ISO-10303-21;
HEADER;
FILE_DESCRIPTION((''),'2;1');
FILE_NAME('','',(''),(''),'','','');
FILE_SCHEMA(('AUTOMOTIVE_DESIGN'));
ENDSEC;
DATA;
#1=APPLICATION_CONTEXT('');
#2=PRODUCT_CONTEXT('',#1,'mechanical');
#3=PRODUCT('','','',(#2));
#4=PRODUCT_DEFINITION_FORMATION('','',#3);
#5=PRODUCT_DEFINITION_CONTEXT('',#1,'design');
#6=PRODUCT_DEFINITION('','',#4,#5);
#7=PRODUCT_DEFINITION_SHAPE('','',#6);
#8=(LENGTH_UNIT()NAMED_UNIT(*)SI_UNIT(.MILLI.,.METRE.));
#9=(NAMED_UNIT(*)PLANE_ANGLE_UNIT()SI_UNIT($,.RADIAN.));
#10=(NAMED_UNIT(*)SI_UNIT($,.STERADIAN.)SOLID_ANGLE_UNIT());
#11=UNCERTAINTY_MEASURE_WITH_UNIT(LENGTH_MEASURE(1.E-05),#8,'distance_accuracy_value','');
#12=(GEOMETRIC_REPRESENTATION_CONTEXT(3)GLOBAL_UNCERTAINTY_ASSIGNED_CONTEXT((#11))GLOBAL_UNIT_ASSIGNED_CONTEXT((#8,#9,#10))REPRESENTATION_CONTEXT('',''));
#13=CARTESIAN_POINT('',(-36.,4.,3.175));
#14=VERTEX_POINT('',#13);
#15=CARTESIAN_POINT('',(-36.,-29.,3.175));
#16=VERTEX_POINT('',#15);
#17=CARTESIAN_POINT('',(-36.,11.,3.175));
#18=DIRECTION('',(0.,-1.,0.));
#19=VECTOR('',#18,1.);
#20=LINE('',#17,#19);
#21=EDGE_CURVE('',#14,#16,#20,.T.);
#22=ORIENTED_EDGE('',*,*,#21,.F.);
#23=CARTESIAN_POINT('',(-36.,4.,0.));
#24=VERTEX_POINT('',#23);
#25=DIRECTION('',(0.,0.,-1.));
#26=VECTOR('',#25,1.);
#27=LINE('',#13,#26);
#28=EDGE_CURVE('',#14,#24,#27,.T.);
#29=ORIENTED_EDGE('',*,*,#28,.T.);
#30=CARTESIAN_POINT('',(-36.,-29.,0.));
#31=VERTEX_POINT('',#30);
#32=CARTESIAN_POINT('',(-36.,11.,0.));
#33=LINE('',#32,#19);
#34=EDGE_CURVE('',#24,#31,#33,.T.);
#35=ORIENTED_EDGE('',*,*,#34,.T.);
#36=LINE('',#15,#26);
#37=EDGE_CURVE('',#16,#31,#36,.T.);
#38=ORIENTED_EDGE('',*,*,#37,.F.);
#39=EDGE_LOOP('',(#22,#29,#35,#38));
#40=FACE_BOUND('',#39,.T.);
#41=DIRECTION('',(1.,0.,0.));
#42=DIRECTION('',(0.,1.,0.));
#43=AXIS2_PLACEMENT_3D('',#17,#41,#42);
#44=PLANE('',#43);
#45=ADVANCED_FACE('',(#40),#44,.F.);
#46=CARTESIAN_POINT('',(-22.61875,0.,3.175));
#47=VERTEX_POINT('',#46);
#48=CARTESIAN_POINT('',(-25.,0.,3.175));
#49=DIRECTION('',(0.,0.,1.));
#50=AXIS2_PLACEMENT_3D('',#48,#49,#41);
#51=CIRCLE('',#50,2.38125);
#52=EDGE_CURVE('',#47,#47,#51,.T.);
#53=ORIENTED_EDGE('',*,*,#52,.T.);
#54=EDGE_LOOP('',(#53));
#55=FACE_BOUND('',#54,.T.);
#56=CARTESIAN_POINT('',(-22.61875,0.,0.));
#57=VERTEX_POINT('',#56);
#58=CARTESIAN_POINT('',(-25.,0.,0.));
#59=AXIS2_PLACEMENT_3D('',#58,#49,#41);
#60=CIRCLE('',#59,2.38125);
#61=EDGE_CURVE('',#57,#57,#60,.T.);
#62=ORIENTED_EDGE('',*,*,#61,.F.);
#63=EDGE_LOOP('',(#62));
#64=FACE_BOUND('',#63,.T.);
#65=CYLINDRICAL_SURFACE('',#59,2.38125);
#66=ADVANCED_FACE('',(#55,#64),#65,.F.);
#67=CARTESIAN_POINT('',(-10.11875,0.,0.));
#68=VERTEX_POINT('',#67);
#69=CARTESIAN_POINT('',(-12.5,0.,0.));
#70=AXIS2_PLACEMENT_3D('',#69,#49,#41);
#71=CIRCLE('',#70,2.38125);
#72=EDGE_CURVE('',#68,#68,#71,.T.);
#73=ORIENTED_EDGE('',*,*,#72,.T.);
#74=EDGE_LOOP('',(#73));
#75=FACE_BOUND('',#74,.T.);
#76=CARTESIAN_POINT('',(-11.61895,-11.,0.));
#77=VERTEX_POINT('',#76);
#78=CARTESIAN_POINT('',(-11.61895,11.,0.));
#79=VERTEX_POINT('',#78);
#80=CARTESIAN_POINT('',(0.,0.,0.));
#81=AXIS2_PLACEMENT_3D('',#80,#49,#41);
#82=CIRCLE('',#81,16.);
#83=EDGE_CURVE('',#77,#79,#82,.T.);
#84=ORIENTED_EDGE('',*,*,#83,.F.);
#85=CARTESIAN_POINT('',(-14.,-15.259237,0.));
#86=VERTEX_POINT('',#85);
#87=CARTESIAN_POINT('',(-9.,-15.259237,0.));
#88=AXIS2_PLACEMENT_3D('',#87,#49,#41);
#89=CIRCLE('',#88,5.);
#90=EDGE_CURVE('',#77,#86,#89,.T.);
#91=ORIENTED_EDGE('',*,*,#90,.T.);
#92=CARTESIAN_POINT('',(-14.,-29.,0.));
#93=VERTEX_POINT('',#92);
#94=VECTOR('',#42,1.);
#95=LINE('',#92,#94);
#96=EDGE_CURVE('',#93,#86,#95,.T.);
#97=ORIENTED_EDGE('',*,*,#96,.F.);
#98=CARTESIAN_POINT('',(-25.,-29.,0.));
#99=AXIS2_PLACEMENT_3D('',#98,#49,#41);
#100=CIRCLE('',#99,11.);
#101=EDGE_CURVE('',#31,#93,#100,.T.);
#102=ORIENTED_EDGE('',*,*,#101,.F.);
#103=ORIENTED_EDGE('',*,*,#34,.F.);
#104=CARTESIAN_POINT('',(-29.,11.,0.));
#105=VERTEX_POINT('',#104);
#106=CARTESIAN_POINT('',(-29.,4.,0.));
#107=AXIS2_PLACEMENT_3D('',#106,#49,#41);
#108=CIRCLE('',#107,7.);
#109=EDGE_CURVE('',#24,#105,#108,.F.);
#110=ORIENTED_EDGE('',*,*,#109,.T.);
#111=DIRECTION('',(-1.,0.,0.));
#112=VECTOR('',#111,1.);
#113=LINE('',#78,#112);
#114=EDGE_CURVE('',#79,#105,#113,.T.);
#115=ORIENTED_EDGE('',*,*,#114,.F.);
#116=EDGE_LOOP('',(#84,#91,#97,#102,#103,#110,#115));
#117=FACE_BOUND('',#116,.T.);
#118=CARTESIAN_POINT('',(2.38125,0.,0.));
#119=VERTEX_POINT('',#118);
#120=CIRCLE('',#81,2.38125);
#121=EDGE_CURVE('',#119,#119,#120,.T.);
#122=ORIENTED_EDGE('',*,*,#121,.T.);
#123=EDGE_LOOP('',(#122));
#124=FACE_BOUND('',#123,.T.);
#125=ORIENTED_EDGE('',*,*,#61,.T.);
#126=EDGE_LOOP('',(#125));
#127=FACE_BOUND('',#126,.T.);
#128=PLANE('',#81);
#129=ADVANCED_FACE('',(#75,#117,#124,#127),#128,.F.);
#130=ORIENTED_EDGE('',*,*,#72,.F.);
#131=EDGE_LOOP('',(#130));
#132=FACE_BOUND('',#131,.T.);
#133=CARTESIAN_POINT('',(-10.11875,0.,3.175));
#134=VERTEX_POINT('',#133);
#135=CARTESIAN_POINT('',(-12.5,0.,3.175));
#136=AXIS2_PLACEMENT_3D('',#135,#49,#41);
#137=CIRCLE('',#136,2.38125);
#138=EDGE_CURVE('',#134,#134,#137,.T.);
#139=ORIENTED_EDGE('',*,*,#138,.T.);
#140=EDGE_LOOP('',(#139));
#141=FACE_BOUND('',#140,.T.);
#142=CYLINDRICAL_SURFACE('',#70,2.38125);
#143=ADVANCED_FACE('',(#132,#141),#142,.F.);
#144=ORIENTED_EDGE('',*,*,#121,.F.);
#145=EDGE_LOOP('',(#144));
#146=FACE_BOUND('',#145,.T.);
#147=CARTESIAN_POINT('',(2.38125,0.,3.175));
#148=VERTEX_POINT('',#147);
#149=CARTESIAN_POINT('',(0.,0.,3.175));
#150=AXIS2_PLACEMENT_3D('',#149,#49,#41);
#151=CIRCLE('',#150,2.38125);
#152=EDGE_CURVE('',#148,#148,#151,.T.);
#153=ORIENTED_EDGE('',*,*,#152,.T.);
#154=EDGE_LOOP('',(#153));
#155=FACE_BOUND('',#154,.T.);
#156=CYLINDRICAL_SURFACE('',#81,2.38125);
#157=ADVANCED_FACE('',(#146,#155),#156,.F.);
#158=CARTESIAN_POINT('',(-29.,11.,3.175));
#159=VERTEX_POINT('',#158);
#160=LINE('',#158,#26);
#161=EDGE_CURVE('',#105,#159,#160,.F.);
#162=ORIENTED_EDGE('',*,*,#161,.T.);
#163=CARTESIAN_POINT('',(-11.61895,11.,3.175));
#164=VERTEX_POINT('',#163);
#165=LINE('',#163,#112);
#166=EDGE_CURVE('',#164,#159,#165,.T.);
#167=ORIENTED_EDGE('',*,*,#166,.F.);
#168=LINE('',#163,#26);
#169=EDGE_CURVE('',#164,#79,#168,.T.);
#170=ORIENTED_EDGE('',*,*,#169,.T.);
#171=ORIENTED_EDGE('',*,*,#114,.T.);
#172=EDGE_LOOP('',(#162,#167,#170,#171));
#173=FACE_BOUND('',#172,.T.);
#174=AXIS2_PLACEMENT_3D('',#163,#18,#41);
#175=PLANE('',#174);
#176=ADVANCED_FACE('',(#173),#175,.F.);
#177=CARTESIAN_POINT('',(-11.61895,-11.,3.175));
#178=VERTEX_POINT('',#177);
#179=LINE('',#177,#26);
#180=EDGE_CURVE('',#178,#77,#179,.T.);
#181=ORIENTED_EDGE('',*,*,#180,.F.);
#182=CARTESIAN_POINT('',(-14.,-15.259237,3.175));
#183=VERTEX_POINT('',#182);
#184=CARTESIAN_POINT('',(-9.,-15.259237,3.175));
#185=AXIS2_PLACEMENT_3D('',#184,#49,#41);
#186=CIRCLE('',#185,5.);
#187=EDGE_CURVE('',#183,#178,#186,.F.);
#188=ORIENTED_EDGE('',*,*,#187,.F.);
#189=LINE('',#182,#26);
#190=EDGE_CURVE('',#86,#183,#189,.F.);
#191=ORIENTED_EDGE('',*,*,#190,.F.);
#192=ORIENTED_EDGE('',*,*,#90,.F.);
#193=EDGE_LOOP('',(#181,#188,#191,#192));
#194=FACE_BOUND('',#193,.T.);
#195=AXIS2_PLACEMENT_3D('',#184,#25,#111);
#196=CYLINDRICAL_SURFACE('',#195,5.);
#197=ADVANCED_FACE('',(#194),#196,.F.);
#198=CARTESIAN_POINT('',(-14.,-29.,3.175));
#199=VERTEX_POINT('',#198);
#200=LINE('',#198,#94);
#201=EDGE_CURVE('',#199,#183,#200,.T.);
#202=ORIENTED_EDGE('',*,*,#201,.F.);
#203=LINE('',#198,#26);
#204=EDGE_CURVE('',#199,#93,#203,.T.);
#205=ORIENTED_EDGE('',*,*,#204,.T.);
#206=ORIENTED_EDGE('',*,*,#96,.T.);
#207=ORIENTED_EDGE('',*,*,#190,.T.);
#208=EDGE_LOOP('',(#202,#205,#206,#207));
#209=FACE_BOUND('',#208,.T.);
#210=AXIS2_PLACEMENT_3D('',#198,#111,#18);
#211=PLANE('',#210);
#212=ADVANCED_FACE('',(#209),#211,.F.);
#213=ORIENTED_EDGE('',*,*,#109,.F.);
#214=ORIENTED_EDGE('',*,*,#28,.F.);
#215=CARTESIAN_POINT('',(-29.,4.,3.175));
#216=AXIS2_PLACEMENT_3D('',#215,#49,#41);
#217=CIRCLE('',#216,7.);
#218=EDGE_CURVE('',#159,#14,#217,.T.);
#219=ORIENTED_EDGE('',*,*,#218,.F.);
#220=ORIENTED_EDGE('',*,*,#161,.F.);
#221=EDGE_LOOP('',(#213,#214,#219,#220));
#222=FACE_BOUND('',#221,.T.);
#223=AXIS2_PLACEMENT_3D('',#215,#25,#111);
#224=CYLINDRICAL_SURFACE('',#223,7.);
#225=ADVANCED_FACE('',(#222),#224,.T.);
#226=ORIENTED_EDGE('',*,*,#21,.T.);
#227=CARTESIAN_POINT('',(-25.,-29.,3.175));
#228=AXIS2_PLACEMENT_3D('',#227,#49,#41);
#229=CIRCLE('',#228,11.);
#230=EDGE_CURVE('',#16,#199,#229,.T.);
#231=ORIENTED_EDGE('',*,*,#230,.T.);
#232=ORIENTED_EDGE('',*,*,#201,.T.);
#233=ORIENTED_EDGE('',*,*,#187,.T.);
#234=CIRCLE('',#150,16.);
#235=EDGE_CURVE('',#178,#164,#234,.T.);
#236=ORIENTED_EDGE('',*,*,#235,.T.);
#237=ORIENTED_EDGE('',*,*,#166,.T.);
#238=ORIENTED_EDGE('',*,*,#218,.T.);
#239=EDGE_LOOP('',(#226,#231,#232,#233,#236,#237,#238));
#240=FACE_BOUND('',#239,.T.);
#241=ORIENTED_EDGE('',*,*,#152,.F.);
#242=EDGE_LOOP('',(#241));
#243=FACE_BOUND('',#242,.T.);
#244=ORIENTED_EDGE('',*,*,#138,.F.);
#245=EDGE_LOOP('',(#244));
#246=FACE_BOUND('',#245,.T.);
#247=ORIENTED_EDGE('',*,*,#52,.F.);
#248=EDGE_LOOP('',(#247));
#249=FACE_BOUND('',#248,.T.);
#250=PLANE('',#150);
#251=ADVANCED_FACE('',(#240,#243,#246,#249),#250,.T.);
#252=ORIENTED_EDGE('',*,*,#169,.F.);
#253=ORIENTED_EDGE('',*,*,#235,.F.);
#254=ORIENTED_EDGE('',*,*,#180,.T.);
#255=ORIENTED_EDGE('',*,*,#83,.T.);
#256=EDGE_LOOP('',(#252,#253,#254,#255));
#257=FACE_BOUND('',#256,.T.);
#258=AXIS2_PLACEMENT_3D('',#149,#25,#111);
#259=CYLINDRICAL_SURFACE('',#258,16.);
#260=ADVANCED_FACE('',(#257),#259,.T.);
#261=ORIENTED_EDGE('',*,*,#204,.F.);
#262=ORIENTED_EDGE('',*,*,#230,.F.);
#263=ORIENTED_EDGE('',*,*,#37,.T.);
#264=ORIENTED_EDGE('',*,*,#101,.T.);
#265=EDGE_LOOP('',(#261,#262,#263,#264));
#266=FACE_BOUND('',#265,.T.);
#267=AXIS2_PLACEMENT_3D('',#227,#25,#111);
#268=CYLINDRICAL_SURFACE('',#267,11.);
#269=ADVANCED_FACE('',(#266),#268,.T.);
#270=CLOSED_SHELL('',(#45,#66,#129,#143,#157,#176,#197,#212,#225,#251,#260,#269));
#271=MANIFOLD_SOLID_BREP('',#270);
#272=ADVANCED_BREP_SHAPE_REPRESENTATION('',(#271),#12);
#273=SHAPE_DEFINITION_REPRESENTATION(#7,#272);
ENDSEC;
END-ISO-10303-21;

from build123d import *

# Parameters (mm, degrees)
BOSS_EXTRUDE1_DEPTH = 3.175
FILLET1_R           = 7
FILLET2_R           = 5
SKETCH2_R           = 2.38125
CUT_EXTRUDE1_DEPTH  = 54.908075694
LPATTERN1_COUNT     = 3
LPATTERN1_PITCH     = 12.5


with BuildPart() as part:
    # Sketch1 → Boss-Extrude1 (new body)
    with BuildSketch(Plane.XY):
        with BuildLine():
            Line((-11.618950039, 11), (-36, 11))
            Line((-36, 11), (-36, -29))
            ThreePointArc((-36, -29), (-25, -40), (-14, -29))
            Line((-14, -29), (-14, -11))
            Line((-14, -11), (-11.618950039, -11))
            ThreePointArc((-11.618950039, -11), (16, 0), (-11.618950039, 11))
        make_face()
    extrude(amount=BOSS_EXTRUDE1_DEPTH)

    # Fillet1
    fillet1_edges = [part.edges().sort_by_distance(p)[0] for p in [
        (-36, 11, 1.5875),
    ]]
    fillet(fillet1_edges, radius=FILLET1_R)

    # Fillet2
    # the kernel refuses this fillet: 5 mm, written as the material it adds along each edge
    with BuildSketch(Plane(origin=(-14, -11, 0), x_dir=(1, 0, 0), z_dir=(0, 0, 1))) as fillet2_piece_1:
        with BuildLine():
            CenterArc((5, -4.259237102), FILLET2_R, 121.586822832, 58.413177168)
            Line((0, -4.259237102), (-0.1, -4.259237102))
            Line((-0.1, -4.259237102), (-0.1, 0))
            Line((-0.1, 0), (0, 0.1))
            ThreePointArc((0, 0.1), (1.190524981, 0.1), (2.328670961, 0.085184742))
            Line((2.328670961, 0.085184742), (2.381049961, 0))
        make_face()
    extrude(amount=3.175)

    # Sketch2 → Cut-Extrude1 (cut, through all)
    with BuildSketch(Plane.XY.offset(3.175)):
        Circle(SKETCH2_R)
    cut_extrude1 = extrude(amount=-CUT_EXTRUDE1_DEPTH, mode=Mode.SUBTRACT)

    # LPattern1: Cut-Extrude1 ×3
    with Locations(*[(-i * LPATTERN1_PITCH, 0, 0) for i in range(1, LPATTERN1_COUNT)]):
        add(cut_extrude1, mode=Mode.SUBTRACT)


solid = part.part
